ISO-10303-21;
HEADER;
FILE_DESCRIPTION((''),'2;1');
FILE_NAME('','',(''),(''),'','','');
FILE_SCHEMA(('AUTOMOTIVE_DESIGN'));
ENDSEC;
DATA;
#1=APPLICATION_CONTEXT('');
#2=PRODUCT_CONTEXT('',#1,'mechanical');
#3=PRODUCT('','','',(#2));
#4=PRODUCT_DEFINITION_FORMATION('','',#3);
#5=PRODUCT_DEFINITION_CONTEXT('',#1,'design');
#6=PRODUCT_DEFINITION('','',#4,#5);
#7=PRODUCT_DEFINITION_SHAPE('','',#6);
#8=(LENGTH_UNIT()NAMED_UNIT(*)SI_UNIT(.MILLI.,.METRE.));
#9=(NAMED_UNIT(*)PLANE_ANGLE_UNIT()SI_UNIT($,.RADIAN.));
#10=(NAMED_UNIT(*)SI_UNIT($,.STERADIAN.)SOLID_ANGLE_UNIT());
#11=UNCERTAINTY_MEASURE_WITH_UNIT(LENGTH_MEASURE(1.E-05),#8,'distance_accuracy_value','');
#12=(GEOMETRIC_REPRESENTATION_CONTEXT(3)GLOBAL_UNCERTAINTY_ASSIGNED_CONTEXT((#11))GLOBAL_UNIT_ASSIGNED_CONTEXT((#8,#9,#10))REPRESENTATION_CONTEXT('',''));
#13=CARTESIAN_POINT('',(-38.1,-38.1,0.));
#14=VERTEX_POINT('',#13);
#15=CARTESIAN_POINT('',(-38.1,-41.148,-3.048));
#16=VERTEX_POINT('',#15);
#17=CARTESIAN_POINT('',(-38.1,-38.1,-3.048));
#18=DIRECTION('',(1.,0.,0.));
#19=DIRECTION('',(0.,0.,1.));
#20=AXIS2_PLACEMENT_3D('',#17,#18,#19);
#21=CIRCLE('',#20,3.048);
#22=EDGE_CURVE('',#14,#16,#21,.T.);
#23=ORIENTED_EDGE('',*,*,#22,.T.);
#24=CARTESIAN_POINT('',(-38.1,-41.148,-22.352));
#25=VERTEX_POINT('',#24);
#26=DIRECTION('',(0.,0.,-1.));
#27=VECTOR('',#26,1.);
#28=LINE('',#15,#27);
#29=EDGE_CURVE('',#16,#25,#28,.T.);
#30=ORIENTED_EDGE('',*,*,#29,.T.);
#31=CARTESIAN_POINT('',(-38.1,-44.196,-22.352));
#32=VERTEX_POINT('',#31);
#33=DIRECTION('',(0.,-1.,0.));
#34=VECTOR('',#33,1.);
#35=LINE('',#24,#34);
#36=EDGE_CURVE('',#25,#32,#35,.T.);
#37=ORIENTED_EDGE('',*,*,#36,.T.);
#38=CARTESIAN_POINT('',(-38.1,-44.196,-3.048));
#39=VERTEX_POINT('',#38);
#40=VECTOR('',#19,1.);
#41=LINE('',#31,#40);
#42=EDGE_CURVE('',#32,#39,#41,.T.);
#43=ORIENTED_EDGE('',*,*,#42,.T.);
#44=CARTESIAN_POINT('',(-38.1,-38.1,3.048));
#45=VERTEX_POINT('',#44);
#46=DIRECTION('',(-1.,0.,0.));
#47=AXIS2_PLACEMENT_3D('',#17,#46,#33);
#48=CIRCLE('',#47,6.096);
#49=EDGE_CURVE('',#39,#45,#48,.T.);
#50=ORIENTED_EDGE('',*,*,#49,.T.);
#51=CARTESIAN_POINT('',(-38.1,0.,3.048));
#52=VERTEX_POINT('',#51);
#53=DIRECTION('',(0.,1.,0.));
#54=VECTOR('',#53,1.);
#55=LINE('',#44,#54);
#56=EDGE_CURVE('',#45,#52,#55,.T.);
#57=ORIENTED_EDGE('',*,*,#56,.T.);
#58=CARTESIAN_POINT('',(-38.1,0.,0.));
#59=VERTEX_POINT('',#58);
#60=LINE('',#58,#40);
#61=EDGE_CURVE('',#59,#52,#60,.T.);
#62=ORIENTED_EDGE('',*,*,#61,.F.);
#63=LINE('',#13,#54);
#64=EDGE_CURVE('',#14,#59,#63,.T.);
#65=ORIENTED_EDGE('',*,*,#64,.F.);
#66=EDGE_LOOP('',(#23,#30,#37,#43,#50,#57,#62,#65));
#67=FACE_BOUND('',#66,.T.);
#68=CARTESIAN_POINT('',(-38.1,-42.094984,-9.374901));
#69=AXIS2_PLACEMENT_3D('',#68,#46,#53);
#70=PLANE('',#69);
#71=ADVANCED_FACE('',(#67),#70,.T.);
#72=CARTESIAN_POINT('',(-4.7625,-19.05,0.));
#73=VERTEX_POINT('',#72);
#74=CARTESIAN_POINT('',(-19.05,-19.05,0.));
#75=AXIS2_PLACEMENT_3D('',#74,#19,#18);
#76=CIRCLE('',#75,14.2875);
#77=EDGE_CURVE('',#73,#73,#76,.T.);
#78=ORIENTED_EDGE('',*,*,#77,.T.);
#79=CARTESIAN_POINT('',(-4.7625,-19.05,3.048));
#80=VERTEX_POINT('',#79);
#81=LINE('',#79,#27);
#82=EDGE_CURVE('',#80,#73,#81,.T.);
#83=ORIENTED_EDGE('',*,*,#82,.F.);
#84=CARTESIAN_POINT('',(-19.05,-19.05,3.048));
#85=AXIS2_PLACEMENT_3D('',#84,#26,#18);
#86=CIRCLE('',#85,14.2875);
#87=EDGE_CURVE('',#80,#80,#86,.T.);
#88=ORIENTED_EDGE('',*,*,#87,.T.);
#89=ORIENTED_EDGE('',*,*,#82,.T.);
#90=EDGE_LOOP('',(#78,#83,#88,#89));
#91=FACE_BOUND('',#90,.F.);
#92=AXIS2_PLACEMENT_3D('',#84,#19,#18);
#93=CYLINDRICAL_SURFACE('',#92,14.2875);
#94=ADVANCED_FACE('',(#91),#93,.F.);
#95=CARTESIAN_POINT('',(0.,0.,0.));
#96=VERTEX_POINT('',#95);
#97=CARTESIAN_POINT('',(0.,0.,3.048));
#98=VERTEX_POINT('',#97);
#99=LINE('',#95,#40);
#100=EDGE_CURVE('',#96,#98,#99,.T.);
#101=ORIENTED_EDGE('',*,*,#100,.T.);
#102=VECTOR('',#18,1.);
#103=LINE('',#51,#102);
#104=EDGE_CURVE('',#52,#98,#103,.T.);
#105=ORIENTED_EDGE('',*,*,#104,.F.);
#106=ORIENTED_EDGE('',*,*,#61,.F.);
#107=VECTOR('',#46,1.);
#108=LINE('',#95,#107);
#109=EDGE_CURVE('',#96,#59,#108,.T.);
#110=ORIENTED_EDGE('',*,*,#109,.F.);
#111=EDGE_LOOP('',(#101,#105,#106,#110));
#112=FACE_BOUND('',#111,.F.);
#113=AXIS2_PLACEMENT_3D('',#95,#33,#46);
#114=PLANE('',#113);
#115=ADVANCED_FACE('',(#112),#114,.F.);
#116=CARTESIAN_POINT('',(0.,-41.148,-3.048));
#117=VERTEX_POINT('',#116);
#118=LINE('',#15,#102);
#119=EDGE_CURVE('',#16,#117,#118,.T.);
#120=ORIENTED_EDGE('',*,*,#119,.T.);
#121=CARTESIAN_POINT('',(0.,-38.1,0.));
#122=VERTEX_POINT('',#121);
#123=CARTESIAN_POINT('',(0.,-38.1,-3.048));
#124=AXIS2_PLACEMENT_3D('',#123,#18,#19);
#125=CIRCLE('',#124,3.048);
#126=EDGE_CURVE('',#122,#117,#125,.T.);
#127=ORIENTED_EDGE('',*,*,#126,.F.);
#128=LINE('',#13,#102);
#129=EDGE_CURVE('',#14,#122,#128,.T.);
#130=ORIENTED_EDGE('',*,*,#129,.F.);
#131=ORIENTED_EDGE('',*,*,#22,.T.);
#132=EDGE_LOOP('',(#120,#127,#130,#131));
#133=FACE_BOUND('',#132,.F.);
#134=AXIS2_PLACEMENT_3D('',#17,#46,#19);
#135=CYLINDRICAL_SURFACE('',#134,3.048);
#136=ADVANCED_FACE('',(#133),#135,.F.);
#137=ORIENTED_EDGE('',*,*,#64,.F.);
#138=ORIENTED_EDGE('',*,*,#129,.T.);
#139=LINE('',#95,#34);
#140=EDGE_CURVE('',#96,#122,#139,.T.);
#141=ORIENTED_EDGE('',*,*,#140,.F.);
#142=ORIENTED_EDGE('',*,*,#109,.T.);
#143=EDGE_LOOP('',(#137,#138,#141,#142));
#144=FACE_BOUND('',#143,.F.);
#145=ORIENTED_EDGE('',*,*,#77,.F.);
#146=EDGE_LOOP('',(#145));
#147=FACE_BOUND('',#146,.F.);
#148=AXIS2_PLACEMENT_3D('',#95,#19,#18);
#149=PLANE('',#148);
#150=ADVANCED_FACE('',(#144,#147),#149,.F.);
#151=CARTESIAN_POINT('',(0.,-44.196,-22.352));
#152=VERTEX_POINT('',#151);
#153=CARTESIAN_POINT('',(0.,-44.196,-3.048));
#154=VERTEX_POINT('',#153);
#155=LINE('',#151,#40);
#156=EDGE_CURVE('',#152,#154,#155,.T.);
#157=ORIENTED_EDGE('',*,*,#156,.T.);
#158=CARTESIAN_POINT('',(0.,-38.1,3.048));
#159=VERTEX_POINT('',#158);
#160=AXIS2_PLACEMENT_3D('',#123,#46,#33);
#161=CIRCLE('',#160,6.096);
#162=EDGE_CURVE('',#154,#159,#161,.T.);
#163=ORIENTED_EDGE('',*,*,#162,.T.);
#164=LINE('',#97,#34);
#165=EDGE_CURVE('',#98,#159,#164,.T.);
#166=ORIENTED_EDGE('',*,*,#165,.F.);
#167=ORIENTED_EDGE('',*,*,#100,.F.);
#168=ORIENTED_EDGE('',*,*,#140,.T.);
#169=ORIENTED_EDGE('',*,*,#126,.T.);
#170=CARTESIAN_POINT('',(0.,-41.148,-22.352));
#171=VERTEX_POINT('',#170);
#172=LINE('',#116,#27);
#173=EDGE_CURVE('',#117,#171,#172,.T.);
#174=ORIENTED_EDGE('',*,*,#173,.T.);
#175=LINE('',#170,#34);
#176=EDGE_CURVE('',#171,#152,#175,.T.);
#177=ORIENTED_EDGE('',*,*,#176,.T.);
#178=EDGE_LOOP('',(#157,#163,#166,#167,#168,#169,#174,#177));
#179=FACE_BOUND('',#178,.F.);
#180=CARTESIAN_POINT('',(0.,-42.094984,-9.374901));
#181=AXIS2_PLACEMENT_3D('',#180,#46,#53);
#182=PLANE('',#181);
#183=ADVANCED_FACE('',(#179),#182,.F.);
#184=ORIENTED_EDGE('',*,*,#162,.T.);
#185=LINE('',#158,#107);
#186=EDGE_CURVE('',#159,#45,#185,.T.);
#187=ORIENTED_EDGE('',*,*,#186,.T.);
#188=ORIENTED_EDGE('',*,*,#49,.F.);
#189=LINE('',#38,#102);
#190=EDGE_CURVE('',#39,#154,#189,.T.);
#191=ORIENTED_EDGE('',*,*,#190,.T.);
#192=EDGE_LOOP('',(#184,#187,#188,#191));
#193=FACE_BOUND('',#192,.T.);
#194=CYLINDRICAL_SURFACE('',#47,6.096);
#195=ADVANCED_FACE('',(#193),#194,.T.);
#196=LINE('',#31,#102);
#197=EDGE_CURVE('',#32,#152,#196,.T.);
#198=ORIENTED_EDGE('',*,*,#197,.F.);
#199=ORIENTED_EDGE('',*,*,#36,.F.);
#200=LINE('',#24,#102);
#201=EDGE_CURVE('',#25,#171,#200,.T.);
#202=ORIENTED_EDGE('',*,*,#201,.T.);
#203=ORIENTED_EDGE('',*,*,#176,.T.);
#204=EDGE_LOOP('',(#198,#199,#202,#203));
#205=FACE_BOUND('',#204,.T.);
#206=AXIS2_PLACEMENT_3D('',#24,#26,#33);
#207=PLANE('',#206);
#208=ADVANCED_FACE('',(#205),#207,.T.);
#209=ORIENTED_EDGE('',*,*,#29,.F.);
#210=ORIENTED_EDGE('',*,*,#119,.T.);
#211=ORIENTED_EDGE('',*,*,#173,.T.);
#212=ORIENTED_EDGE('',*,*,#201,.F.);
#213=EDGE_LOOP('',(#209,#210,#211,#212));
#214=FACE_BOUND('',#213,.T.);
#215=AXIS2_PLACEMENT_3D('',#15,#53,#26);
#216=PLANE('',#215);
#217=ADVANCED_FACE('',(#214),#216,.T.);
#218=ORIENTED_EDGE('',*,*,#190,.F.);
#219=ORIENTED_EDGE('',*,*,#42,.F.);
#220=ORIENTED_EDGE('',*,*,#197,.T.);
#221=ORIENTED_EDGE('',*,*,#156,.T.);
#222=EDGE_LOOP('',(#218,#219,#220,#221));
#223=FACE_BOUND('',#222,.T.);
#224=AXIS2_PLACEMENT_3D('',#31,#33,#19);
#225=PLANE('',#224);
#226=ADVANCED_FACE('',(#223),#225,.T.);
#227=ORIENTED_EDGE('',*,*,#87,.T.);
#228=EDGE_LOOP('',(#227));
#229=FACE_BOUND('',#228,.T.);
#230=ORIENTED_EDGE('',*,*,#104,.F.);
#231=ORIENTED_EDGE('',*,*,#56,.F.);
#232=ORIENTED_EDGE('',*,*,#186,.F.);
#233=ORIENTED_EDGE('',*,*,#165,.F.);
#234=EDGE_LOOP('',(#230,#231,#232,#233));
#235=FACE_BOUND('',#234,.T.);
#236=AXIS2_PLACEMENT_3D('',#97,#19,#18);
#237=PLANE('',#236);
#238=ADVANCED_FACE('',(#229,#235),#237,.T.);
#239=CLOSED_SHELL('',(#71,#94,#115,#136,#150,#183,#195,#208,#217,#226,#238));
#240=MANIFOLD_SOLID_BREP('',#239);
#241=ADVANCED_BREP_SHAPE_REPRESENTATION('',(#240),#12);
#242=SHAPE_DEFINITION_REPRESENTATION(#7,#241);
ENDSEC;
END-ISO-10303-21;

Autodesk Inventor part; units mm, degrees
ref_plane "YZ Plane" through (0, 0, 0) normal (1, 0, 0) x (0, 1, 0)
ref_plane "XZ Plane" through (0, 0, 0) normal (0, 1, 0) x (-1, 0, 0)
ref_plane "XY Plane" through (0, 0, 0) normal (0, 0, 1) x (1, 0, 0)
sketch "Sketch1" plane through (0, 0, 0) normal (0, 0, 1) x (1, 0, 0)
  line L0 (0, 0) -> (-38.1, 0)
  line L1 (-19.05, 0) -> (-19.05, -38.1)
  line L2 (-19.05, -38.1) -> (-38.1, -38.1)
  line L3 (-38.1, -38.1) -> (-38.1, 0)
  line L4 (-19.05, -38.1) -> (0, -38.1)
  line L5 (0, 0) -> (0, -38.1)
  dimension "d0" = 38.1
  dimension "d1" = 38.1
  dimension "d2" = 19.05
  dimension "d3" = 19.05
extrude "Plate1" add sketch "Sketch1" along normal blind 3.048
sketch "Sketch2" plane through (0, 0, 3.048) normal (0, 0, 1) x (1, 0, 0)
  line L0 (-38.1, 0) -> (0, 0) projected
  line L1 (0, -38.1) -> (-38.1, -38.1) projected
  line L2 (-19.05, 0) -> (-19.05, -19.05)
  circle A0 centre (-19.05, -19.05) radius 14.2875
  dimension "d7" = 19.05
  dimension "d8" = 28.575
extrude "Cut1" cut sketch "Sketch2" against normal blind 3.048
sketch "Sketch3" plane through (-38.1, -41.148, -3.048) normal (0, -1, 0) x (1, 0, 0)
  line L0 (38.1, 0) -> (0, 0)
  line L1 (0, 0) -> (0, -19.304)
  line L2 (0, -19.304) -> (38.1, -19.304)
  line L3 (38.1, -19.304) -> (38.1, 0)
edge flange "Flange1" height 25.4 angle 90 thickness 3.048 bend radius 3.048 thickness toward (0, -1, 0) relief straight relief width 3.048 relief depth 1.524 edges at (-19.05, -38.1, 0) wall of the first edge with corners at (0, -41.148, -3.048) (-38.1, -41.148, -3.048) (-38.1, -41.148, -22.352) (0, -41.148, -22.352)
bend "Bend1"
corner "Corner1"
sketch "Sketch5" plane through (-38.1, -41.148, -22.352) normal (0, 1, 0) x (1, 0, 0)
  line L0 (0, -19.304) -> (38.1, -19.304) projected
  line L1 (38.1, 0) -> (38.1, -19.304) projected
  line L2 (38.1, 0) -> (0, 0) projected
  line L3 (0, 0) -> (0, -19.304) projected
  point P0 (38.1, -22.352)
equation "\"d9\" = Thickness"
equation "\"d11\" = BendReliefWidth"
equation "\"d12\" = BendReliefDepth"
equation "\"d13\" = MinimumRemnant"
equation "\"d14\" = BendRadius"
equation "\"d17\" = BendRadius"
equation "\"d18\" = CornerReliefSize"
equation "\"d19\" = GapSize"
equation "\"d20\" = JacobiRadiusSize"
equation "\"BendRadius\" = Thickness"
equation "\"BendReliefWidth\" = Thickness"
equation "\"BendReliefDepth\" = 0.5 * Thickness"
equation "\"CornerReliefSize\" = 4 * Thickness"
equation "\"MinimumRemnant\" = 2 * Thickness"
equation "\"TransitionRadius\" = BendRadius"
equation "\"JacobiRadiusSize\" = Thickness"
equation "\"GapSize\" = Thickness"
equation "\"d4\" = BendRadius"
equation "\"Thickness\" = 3.048"
properties part number "arm assembly outer mount"
